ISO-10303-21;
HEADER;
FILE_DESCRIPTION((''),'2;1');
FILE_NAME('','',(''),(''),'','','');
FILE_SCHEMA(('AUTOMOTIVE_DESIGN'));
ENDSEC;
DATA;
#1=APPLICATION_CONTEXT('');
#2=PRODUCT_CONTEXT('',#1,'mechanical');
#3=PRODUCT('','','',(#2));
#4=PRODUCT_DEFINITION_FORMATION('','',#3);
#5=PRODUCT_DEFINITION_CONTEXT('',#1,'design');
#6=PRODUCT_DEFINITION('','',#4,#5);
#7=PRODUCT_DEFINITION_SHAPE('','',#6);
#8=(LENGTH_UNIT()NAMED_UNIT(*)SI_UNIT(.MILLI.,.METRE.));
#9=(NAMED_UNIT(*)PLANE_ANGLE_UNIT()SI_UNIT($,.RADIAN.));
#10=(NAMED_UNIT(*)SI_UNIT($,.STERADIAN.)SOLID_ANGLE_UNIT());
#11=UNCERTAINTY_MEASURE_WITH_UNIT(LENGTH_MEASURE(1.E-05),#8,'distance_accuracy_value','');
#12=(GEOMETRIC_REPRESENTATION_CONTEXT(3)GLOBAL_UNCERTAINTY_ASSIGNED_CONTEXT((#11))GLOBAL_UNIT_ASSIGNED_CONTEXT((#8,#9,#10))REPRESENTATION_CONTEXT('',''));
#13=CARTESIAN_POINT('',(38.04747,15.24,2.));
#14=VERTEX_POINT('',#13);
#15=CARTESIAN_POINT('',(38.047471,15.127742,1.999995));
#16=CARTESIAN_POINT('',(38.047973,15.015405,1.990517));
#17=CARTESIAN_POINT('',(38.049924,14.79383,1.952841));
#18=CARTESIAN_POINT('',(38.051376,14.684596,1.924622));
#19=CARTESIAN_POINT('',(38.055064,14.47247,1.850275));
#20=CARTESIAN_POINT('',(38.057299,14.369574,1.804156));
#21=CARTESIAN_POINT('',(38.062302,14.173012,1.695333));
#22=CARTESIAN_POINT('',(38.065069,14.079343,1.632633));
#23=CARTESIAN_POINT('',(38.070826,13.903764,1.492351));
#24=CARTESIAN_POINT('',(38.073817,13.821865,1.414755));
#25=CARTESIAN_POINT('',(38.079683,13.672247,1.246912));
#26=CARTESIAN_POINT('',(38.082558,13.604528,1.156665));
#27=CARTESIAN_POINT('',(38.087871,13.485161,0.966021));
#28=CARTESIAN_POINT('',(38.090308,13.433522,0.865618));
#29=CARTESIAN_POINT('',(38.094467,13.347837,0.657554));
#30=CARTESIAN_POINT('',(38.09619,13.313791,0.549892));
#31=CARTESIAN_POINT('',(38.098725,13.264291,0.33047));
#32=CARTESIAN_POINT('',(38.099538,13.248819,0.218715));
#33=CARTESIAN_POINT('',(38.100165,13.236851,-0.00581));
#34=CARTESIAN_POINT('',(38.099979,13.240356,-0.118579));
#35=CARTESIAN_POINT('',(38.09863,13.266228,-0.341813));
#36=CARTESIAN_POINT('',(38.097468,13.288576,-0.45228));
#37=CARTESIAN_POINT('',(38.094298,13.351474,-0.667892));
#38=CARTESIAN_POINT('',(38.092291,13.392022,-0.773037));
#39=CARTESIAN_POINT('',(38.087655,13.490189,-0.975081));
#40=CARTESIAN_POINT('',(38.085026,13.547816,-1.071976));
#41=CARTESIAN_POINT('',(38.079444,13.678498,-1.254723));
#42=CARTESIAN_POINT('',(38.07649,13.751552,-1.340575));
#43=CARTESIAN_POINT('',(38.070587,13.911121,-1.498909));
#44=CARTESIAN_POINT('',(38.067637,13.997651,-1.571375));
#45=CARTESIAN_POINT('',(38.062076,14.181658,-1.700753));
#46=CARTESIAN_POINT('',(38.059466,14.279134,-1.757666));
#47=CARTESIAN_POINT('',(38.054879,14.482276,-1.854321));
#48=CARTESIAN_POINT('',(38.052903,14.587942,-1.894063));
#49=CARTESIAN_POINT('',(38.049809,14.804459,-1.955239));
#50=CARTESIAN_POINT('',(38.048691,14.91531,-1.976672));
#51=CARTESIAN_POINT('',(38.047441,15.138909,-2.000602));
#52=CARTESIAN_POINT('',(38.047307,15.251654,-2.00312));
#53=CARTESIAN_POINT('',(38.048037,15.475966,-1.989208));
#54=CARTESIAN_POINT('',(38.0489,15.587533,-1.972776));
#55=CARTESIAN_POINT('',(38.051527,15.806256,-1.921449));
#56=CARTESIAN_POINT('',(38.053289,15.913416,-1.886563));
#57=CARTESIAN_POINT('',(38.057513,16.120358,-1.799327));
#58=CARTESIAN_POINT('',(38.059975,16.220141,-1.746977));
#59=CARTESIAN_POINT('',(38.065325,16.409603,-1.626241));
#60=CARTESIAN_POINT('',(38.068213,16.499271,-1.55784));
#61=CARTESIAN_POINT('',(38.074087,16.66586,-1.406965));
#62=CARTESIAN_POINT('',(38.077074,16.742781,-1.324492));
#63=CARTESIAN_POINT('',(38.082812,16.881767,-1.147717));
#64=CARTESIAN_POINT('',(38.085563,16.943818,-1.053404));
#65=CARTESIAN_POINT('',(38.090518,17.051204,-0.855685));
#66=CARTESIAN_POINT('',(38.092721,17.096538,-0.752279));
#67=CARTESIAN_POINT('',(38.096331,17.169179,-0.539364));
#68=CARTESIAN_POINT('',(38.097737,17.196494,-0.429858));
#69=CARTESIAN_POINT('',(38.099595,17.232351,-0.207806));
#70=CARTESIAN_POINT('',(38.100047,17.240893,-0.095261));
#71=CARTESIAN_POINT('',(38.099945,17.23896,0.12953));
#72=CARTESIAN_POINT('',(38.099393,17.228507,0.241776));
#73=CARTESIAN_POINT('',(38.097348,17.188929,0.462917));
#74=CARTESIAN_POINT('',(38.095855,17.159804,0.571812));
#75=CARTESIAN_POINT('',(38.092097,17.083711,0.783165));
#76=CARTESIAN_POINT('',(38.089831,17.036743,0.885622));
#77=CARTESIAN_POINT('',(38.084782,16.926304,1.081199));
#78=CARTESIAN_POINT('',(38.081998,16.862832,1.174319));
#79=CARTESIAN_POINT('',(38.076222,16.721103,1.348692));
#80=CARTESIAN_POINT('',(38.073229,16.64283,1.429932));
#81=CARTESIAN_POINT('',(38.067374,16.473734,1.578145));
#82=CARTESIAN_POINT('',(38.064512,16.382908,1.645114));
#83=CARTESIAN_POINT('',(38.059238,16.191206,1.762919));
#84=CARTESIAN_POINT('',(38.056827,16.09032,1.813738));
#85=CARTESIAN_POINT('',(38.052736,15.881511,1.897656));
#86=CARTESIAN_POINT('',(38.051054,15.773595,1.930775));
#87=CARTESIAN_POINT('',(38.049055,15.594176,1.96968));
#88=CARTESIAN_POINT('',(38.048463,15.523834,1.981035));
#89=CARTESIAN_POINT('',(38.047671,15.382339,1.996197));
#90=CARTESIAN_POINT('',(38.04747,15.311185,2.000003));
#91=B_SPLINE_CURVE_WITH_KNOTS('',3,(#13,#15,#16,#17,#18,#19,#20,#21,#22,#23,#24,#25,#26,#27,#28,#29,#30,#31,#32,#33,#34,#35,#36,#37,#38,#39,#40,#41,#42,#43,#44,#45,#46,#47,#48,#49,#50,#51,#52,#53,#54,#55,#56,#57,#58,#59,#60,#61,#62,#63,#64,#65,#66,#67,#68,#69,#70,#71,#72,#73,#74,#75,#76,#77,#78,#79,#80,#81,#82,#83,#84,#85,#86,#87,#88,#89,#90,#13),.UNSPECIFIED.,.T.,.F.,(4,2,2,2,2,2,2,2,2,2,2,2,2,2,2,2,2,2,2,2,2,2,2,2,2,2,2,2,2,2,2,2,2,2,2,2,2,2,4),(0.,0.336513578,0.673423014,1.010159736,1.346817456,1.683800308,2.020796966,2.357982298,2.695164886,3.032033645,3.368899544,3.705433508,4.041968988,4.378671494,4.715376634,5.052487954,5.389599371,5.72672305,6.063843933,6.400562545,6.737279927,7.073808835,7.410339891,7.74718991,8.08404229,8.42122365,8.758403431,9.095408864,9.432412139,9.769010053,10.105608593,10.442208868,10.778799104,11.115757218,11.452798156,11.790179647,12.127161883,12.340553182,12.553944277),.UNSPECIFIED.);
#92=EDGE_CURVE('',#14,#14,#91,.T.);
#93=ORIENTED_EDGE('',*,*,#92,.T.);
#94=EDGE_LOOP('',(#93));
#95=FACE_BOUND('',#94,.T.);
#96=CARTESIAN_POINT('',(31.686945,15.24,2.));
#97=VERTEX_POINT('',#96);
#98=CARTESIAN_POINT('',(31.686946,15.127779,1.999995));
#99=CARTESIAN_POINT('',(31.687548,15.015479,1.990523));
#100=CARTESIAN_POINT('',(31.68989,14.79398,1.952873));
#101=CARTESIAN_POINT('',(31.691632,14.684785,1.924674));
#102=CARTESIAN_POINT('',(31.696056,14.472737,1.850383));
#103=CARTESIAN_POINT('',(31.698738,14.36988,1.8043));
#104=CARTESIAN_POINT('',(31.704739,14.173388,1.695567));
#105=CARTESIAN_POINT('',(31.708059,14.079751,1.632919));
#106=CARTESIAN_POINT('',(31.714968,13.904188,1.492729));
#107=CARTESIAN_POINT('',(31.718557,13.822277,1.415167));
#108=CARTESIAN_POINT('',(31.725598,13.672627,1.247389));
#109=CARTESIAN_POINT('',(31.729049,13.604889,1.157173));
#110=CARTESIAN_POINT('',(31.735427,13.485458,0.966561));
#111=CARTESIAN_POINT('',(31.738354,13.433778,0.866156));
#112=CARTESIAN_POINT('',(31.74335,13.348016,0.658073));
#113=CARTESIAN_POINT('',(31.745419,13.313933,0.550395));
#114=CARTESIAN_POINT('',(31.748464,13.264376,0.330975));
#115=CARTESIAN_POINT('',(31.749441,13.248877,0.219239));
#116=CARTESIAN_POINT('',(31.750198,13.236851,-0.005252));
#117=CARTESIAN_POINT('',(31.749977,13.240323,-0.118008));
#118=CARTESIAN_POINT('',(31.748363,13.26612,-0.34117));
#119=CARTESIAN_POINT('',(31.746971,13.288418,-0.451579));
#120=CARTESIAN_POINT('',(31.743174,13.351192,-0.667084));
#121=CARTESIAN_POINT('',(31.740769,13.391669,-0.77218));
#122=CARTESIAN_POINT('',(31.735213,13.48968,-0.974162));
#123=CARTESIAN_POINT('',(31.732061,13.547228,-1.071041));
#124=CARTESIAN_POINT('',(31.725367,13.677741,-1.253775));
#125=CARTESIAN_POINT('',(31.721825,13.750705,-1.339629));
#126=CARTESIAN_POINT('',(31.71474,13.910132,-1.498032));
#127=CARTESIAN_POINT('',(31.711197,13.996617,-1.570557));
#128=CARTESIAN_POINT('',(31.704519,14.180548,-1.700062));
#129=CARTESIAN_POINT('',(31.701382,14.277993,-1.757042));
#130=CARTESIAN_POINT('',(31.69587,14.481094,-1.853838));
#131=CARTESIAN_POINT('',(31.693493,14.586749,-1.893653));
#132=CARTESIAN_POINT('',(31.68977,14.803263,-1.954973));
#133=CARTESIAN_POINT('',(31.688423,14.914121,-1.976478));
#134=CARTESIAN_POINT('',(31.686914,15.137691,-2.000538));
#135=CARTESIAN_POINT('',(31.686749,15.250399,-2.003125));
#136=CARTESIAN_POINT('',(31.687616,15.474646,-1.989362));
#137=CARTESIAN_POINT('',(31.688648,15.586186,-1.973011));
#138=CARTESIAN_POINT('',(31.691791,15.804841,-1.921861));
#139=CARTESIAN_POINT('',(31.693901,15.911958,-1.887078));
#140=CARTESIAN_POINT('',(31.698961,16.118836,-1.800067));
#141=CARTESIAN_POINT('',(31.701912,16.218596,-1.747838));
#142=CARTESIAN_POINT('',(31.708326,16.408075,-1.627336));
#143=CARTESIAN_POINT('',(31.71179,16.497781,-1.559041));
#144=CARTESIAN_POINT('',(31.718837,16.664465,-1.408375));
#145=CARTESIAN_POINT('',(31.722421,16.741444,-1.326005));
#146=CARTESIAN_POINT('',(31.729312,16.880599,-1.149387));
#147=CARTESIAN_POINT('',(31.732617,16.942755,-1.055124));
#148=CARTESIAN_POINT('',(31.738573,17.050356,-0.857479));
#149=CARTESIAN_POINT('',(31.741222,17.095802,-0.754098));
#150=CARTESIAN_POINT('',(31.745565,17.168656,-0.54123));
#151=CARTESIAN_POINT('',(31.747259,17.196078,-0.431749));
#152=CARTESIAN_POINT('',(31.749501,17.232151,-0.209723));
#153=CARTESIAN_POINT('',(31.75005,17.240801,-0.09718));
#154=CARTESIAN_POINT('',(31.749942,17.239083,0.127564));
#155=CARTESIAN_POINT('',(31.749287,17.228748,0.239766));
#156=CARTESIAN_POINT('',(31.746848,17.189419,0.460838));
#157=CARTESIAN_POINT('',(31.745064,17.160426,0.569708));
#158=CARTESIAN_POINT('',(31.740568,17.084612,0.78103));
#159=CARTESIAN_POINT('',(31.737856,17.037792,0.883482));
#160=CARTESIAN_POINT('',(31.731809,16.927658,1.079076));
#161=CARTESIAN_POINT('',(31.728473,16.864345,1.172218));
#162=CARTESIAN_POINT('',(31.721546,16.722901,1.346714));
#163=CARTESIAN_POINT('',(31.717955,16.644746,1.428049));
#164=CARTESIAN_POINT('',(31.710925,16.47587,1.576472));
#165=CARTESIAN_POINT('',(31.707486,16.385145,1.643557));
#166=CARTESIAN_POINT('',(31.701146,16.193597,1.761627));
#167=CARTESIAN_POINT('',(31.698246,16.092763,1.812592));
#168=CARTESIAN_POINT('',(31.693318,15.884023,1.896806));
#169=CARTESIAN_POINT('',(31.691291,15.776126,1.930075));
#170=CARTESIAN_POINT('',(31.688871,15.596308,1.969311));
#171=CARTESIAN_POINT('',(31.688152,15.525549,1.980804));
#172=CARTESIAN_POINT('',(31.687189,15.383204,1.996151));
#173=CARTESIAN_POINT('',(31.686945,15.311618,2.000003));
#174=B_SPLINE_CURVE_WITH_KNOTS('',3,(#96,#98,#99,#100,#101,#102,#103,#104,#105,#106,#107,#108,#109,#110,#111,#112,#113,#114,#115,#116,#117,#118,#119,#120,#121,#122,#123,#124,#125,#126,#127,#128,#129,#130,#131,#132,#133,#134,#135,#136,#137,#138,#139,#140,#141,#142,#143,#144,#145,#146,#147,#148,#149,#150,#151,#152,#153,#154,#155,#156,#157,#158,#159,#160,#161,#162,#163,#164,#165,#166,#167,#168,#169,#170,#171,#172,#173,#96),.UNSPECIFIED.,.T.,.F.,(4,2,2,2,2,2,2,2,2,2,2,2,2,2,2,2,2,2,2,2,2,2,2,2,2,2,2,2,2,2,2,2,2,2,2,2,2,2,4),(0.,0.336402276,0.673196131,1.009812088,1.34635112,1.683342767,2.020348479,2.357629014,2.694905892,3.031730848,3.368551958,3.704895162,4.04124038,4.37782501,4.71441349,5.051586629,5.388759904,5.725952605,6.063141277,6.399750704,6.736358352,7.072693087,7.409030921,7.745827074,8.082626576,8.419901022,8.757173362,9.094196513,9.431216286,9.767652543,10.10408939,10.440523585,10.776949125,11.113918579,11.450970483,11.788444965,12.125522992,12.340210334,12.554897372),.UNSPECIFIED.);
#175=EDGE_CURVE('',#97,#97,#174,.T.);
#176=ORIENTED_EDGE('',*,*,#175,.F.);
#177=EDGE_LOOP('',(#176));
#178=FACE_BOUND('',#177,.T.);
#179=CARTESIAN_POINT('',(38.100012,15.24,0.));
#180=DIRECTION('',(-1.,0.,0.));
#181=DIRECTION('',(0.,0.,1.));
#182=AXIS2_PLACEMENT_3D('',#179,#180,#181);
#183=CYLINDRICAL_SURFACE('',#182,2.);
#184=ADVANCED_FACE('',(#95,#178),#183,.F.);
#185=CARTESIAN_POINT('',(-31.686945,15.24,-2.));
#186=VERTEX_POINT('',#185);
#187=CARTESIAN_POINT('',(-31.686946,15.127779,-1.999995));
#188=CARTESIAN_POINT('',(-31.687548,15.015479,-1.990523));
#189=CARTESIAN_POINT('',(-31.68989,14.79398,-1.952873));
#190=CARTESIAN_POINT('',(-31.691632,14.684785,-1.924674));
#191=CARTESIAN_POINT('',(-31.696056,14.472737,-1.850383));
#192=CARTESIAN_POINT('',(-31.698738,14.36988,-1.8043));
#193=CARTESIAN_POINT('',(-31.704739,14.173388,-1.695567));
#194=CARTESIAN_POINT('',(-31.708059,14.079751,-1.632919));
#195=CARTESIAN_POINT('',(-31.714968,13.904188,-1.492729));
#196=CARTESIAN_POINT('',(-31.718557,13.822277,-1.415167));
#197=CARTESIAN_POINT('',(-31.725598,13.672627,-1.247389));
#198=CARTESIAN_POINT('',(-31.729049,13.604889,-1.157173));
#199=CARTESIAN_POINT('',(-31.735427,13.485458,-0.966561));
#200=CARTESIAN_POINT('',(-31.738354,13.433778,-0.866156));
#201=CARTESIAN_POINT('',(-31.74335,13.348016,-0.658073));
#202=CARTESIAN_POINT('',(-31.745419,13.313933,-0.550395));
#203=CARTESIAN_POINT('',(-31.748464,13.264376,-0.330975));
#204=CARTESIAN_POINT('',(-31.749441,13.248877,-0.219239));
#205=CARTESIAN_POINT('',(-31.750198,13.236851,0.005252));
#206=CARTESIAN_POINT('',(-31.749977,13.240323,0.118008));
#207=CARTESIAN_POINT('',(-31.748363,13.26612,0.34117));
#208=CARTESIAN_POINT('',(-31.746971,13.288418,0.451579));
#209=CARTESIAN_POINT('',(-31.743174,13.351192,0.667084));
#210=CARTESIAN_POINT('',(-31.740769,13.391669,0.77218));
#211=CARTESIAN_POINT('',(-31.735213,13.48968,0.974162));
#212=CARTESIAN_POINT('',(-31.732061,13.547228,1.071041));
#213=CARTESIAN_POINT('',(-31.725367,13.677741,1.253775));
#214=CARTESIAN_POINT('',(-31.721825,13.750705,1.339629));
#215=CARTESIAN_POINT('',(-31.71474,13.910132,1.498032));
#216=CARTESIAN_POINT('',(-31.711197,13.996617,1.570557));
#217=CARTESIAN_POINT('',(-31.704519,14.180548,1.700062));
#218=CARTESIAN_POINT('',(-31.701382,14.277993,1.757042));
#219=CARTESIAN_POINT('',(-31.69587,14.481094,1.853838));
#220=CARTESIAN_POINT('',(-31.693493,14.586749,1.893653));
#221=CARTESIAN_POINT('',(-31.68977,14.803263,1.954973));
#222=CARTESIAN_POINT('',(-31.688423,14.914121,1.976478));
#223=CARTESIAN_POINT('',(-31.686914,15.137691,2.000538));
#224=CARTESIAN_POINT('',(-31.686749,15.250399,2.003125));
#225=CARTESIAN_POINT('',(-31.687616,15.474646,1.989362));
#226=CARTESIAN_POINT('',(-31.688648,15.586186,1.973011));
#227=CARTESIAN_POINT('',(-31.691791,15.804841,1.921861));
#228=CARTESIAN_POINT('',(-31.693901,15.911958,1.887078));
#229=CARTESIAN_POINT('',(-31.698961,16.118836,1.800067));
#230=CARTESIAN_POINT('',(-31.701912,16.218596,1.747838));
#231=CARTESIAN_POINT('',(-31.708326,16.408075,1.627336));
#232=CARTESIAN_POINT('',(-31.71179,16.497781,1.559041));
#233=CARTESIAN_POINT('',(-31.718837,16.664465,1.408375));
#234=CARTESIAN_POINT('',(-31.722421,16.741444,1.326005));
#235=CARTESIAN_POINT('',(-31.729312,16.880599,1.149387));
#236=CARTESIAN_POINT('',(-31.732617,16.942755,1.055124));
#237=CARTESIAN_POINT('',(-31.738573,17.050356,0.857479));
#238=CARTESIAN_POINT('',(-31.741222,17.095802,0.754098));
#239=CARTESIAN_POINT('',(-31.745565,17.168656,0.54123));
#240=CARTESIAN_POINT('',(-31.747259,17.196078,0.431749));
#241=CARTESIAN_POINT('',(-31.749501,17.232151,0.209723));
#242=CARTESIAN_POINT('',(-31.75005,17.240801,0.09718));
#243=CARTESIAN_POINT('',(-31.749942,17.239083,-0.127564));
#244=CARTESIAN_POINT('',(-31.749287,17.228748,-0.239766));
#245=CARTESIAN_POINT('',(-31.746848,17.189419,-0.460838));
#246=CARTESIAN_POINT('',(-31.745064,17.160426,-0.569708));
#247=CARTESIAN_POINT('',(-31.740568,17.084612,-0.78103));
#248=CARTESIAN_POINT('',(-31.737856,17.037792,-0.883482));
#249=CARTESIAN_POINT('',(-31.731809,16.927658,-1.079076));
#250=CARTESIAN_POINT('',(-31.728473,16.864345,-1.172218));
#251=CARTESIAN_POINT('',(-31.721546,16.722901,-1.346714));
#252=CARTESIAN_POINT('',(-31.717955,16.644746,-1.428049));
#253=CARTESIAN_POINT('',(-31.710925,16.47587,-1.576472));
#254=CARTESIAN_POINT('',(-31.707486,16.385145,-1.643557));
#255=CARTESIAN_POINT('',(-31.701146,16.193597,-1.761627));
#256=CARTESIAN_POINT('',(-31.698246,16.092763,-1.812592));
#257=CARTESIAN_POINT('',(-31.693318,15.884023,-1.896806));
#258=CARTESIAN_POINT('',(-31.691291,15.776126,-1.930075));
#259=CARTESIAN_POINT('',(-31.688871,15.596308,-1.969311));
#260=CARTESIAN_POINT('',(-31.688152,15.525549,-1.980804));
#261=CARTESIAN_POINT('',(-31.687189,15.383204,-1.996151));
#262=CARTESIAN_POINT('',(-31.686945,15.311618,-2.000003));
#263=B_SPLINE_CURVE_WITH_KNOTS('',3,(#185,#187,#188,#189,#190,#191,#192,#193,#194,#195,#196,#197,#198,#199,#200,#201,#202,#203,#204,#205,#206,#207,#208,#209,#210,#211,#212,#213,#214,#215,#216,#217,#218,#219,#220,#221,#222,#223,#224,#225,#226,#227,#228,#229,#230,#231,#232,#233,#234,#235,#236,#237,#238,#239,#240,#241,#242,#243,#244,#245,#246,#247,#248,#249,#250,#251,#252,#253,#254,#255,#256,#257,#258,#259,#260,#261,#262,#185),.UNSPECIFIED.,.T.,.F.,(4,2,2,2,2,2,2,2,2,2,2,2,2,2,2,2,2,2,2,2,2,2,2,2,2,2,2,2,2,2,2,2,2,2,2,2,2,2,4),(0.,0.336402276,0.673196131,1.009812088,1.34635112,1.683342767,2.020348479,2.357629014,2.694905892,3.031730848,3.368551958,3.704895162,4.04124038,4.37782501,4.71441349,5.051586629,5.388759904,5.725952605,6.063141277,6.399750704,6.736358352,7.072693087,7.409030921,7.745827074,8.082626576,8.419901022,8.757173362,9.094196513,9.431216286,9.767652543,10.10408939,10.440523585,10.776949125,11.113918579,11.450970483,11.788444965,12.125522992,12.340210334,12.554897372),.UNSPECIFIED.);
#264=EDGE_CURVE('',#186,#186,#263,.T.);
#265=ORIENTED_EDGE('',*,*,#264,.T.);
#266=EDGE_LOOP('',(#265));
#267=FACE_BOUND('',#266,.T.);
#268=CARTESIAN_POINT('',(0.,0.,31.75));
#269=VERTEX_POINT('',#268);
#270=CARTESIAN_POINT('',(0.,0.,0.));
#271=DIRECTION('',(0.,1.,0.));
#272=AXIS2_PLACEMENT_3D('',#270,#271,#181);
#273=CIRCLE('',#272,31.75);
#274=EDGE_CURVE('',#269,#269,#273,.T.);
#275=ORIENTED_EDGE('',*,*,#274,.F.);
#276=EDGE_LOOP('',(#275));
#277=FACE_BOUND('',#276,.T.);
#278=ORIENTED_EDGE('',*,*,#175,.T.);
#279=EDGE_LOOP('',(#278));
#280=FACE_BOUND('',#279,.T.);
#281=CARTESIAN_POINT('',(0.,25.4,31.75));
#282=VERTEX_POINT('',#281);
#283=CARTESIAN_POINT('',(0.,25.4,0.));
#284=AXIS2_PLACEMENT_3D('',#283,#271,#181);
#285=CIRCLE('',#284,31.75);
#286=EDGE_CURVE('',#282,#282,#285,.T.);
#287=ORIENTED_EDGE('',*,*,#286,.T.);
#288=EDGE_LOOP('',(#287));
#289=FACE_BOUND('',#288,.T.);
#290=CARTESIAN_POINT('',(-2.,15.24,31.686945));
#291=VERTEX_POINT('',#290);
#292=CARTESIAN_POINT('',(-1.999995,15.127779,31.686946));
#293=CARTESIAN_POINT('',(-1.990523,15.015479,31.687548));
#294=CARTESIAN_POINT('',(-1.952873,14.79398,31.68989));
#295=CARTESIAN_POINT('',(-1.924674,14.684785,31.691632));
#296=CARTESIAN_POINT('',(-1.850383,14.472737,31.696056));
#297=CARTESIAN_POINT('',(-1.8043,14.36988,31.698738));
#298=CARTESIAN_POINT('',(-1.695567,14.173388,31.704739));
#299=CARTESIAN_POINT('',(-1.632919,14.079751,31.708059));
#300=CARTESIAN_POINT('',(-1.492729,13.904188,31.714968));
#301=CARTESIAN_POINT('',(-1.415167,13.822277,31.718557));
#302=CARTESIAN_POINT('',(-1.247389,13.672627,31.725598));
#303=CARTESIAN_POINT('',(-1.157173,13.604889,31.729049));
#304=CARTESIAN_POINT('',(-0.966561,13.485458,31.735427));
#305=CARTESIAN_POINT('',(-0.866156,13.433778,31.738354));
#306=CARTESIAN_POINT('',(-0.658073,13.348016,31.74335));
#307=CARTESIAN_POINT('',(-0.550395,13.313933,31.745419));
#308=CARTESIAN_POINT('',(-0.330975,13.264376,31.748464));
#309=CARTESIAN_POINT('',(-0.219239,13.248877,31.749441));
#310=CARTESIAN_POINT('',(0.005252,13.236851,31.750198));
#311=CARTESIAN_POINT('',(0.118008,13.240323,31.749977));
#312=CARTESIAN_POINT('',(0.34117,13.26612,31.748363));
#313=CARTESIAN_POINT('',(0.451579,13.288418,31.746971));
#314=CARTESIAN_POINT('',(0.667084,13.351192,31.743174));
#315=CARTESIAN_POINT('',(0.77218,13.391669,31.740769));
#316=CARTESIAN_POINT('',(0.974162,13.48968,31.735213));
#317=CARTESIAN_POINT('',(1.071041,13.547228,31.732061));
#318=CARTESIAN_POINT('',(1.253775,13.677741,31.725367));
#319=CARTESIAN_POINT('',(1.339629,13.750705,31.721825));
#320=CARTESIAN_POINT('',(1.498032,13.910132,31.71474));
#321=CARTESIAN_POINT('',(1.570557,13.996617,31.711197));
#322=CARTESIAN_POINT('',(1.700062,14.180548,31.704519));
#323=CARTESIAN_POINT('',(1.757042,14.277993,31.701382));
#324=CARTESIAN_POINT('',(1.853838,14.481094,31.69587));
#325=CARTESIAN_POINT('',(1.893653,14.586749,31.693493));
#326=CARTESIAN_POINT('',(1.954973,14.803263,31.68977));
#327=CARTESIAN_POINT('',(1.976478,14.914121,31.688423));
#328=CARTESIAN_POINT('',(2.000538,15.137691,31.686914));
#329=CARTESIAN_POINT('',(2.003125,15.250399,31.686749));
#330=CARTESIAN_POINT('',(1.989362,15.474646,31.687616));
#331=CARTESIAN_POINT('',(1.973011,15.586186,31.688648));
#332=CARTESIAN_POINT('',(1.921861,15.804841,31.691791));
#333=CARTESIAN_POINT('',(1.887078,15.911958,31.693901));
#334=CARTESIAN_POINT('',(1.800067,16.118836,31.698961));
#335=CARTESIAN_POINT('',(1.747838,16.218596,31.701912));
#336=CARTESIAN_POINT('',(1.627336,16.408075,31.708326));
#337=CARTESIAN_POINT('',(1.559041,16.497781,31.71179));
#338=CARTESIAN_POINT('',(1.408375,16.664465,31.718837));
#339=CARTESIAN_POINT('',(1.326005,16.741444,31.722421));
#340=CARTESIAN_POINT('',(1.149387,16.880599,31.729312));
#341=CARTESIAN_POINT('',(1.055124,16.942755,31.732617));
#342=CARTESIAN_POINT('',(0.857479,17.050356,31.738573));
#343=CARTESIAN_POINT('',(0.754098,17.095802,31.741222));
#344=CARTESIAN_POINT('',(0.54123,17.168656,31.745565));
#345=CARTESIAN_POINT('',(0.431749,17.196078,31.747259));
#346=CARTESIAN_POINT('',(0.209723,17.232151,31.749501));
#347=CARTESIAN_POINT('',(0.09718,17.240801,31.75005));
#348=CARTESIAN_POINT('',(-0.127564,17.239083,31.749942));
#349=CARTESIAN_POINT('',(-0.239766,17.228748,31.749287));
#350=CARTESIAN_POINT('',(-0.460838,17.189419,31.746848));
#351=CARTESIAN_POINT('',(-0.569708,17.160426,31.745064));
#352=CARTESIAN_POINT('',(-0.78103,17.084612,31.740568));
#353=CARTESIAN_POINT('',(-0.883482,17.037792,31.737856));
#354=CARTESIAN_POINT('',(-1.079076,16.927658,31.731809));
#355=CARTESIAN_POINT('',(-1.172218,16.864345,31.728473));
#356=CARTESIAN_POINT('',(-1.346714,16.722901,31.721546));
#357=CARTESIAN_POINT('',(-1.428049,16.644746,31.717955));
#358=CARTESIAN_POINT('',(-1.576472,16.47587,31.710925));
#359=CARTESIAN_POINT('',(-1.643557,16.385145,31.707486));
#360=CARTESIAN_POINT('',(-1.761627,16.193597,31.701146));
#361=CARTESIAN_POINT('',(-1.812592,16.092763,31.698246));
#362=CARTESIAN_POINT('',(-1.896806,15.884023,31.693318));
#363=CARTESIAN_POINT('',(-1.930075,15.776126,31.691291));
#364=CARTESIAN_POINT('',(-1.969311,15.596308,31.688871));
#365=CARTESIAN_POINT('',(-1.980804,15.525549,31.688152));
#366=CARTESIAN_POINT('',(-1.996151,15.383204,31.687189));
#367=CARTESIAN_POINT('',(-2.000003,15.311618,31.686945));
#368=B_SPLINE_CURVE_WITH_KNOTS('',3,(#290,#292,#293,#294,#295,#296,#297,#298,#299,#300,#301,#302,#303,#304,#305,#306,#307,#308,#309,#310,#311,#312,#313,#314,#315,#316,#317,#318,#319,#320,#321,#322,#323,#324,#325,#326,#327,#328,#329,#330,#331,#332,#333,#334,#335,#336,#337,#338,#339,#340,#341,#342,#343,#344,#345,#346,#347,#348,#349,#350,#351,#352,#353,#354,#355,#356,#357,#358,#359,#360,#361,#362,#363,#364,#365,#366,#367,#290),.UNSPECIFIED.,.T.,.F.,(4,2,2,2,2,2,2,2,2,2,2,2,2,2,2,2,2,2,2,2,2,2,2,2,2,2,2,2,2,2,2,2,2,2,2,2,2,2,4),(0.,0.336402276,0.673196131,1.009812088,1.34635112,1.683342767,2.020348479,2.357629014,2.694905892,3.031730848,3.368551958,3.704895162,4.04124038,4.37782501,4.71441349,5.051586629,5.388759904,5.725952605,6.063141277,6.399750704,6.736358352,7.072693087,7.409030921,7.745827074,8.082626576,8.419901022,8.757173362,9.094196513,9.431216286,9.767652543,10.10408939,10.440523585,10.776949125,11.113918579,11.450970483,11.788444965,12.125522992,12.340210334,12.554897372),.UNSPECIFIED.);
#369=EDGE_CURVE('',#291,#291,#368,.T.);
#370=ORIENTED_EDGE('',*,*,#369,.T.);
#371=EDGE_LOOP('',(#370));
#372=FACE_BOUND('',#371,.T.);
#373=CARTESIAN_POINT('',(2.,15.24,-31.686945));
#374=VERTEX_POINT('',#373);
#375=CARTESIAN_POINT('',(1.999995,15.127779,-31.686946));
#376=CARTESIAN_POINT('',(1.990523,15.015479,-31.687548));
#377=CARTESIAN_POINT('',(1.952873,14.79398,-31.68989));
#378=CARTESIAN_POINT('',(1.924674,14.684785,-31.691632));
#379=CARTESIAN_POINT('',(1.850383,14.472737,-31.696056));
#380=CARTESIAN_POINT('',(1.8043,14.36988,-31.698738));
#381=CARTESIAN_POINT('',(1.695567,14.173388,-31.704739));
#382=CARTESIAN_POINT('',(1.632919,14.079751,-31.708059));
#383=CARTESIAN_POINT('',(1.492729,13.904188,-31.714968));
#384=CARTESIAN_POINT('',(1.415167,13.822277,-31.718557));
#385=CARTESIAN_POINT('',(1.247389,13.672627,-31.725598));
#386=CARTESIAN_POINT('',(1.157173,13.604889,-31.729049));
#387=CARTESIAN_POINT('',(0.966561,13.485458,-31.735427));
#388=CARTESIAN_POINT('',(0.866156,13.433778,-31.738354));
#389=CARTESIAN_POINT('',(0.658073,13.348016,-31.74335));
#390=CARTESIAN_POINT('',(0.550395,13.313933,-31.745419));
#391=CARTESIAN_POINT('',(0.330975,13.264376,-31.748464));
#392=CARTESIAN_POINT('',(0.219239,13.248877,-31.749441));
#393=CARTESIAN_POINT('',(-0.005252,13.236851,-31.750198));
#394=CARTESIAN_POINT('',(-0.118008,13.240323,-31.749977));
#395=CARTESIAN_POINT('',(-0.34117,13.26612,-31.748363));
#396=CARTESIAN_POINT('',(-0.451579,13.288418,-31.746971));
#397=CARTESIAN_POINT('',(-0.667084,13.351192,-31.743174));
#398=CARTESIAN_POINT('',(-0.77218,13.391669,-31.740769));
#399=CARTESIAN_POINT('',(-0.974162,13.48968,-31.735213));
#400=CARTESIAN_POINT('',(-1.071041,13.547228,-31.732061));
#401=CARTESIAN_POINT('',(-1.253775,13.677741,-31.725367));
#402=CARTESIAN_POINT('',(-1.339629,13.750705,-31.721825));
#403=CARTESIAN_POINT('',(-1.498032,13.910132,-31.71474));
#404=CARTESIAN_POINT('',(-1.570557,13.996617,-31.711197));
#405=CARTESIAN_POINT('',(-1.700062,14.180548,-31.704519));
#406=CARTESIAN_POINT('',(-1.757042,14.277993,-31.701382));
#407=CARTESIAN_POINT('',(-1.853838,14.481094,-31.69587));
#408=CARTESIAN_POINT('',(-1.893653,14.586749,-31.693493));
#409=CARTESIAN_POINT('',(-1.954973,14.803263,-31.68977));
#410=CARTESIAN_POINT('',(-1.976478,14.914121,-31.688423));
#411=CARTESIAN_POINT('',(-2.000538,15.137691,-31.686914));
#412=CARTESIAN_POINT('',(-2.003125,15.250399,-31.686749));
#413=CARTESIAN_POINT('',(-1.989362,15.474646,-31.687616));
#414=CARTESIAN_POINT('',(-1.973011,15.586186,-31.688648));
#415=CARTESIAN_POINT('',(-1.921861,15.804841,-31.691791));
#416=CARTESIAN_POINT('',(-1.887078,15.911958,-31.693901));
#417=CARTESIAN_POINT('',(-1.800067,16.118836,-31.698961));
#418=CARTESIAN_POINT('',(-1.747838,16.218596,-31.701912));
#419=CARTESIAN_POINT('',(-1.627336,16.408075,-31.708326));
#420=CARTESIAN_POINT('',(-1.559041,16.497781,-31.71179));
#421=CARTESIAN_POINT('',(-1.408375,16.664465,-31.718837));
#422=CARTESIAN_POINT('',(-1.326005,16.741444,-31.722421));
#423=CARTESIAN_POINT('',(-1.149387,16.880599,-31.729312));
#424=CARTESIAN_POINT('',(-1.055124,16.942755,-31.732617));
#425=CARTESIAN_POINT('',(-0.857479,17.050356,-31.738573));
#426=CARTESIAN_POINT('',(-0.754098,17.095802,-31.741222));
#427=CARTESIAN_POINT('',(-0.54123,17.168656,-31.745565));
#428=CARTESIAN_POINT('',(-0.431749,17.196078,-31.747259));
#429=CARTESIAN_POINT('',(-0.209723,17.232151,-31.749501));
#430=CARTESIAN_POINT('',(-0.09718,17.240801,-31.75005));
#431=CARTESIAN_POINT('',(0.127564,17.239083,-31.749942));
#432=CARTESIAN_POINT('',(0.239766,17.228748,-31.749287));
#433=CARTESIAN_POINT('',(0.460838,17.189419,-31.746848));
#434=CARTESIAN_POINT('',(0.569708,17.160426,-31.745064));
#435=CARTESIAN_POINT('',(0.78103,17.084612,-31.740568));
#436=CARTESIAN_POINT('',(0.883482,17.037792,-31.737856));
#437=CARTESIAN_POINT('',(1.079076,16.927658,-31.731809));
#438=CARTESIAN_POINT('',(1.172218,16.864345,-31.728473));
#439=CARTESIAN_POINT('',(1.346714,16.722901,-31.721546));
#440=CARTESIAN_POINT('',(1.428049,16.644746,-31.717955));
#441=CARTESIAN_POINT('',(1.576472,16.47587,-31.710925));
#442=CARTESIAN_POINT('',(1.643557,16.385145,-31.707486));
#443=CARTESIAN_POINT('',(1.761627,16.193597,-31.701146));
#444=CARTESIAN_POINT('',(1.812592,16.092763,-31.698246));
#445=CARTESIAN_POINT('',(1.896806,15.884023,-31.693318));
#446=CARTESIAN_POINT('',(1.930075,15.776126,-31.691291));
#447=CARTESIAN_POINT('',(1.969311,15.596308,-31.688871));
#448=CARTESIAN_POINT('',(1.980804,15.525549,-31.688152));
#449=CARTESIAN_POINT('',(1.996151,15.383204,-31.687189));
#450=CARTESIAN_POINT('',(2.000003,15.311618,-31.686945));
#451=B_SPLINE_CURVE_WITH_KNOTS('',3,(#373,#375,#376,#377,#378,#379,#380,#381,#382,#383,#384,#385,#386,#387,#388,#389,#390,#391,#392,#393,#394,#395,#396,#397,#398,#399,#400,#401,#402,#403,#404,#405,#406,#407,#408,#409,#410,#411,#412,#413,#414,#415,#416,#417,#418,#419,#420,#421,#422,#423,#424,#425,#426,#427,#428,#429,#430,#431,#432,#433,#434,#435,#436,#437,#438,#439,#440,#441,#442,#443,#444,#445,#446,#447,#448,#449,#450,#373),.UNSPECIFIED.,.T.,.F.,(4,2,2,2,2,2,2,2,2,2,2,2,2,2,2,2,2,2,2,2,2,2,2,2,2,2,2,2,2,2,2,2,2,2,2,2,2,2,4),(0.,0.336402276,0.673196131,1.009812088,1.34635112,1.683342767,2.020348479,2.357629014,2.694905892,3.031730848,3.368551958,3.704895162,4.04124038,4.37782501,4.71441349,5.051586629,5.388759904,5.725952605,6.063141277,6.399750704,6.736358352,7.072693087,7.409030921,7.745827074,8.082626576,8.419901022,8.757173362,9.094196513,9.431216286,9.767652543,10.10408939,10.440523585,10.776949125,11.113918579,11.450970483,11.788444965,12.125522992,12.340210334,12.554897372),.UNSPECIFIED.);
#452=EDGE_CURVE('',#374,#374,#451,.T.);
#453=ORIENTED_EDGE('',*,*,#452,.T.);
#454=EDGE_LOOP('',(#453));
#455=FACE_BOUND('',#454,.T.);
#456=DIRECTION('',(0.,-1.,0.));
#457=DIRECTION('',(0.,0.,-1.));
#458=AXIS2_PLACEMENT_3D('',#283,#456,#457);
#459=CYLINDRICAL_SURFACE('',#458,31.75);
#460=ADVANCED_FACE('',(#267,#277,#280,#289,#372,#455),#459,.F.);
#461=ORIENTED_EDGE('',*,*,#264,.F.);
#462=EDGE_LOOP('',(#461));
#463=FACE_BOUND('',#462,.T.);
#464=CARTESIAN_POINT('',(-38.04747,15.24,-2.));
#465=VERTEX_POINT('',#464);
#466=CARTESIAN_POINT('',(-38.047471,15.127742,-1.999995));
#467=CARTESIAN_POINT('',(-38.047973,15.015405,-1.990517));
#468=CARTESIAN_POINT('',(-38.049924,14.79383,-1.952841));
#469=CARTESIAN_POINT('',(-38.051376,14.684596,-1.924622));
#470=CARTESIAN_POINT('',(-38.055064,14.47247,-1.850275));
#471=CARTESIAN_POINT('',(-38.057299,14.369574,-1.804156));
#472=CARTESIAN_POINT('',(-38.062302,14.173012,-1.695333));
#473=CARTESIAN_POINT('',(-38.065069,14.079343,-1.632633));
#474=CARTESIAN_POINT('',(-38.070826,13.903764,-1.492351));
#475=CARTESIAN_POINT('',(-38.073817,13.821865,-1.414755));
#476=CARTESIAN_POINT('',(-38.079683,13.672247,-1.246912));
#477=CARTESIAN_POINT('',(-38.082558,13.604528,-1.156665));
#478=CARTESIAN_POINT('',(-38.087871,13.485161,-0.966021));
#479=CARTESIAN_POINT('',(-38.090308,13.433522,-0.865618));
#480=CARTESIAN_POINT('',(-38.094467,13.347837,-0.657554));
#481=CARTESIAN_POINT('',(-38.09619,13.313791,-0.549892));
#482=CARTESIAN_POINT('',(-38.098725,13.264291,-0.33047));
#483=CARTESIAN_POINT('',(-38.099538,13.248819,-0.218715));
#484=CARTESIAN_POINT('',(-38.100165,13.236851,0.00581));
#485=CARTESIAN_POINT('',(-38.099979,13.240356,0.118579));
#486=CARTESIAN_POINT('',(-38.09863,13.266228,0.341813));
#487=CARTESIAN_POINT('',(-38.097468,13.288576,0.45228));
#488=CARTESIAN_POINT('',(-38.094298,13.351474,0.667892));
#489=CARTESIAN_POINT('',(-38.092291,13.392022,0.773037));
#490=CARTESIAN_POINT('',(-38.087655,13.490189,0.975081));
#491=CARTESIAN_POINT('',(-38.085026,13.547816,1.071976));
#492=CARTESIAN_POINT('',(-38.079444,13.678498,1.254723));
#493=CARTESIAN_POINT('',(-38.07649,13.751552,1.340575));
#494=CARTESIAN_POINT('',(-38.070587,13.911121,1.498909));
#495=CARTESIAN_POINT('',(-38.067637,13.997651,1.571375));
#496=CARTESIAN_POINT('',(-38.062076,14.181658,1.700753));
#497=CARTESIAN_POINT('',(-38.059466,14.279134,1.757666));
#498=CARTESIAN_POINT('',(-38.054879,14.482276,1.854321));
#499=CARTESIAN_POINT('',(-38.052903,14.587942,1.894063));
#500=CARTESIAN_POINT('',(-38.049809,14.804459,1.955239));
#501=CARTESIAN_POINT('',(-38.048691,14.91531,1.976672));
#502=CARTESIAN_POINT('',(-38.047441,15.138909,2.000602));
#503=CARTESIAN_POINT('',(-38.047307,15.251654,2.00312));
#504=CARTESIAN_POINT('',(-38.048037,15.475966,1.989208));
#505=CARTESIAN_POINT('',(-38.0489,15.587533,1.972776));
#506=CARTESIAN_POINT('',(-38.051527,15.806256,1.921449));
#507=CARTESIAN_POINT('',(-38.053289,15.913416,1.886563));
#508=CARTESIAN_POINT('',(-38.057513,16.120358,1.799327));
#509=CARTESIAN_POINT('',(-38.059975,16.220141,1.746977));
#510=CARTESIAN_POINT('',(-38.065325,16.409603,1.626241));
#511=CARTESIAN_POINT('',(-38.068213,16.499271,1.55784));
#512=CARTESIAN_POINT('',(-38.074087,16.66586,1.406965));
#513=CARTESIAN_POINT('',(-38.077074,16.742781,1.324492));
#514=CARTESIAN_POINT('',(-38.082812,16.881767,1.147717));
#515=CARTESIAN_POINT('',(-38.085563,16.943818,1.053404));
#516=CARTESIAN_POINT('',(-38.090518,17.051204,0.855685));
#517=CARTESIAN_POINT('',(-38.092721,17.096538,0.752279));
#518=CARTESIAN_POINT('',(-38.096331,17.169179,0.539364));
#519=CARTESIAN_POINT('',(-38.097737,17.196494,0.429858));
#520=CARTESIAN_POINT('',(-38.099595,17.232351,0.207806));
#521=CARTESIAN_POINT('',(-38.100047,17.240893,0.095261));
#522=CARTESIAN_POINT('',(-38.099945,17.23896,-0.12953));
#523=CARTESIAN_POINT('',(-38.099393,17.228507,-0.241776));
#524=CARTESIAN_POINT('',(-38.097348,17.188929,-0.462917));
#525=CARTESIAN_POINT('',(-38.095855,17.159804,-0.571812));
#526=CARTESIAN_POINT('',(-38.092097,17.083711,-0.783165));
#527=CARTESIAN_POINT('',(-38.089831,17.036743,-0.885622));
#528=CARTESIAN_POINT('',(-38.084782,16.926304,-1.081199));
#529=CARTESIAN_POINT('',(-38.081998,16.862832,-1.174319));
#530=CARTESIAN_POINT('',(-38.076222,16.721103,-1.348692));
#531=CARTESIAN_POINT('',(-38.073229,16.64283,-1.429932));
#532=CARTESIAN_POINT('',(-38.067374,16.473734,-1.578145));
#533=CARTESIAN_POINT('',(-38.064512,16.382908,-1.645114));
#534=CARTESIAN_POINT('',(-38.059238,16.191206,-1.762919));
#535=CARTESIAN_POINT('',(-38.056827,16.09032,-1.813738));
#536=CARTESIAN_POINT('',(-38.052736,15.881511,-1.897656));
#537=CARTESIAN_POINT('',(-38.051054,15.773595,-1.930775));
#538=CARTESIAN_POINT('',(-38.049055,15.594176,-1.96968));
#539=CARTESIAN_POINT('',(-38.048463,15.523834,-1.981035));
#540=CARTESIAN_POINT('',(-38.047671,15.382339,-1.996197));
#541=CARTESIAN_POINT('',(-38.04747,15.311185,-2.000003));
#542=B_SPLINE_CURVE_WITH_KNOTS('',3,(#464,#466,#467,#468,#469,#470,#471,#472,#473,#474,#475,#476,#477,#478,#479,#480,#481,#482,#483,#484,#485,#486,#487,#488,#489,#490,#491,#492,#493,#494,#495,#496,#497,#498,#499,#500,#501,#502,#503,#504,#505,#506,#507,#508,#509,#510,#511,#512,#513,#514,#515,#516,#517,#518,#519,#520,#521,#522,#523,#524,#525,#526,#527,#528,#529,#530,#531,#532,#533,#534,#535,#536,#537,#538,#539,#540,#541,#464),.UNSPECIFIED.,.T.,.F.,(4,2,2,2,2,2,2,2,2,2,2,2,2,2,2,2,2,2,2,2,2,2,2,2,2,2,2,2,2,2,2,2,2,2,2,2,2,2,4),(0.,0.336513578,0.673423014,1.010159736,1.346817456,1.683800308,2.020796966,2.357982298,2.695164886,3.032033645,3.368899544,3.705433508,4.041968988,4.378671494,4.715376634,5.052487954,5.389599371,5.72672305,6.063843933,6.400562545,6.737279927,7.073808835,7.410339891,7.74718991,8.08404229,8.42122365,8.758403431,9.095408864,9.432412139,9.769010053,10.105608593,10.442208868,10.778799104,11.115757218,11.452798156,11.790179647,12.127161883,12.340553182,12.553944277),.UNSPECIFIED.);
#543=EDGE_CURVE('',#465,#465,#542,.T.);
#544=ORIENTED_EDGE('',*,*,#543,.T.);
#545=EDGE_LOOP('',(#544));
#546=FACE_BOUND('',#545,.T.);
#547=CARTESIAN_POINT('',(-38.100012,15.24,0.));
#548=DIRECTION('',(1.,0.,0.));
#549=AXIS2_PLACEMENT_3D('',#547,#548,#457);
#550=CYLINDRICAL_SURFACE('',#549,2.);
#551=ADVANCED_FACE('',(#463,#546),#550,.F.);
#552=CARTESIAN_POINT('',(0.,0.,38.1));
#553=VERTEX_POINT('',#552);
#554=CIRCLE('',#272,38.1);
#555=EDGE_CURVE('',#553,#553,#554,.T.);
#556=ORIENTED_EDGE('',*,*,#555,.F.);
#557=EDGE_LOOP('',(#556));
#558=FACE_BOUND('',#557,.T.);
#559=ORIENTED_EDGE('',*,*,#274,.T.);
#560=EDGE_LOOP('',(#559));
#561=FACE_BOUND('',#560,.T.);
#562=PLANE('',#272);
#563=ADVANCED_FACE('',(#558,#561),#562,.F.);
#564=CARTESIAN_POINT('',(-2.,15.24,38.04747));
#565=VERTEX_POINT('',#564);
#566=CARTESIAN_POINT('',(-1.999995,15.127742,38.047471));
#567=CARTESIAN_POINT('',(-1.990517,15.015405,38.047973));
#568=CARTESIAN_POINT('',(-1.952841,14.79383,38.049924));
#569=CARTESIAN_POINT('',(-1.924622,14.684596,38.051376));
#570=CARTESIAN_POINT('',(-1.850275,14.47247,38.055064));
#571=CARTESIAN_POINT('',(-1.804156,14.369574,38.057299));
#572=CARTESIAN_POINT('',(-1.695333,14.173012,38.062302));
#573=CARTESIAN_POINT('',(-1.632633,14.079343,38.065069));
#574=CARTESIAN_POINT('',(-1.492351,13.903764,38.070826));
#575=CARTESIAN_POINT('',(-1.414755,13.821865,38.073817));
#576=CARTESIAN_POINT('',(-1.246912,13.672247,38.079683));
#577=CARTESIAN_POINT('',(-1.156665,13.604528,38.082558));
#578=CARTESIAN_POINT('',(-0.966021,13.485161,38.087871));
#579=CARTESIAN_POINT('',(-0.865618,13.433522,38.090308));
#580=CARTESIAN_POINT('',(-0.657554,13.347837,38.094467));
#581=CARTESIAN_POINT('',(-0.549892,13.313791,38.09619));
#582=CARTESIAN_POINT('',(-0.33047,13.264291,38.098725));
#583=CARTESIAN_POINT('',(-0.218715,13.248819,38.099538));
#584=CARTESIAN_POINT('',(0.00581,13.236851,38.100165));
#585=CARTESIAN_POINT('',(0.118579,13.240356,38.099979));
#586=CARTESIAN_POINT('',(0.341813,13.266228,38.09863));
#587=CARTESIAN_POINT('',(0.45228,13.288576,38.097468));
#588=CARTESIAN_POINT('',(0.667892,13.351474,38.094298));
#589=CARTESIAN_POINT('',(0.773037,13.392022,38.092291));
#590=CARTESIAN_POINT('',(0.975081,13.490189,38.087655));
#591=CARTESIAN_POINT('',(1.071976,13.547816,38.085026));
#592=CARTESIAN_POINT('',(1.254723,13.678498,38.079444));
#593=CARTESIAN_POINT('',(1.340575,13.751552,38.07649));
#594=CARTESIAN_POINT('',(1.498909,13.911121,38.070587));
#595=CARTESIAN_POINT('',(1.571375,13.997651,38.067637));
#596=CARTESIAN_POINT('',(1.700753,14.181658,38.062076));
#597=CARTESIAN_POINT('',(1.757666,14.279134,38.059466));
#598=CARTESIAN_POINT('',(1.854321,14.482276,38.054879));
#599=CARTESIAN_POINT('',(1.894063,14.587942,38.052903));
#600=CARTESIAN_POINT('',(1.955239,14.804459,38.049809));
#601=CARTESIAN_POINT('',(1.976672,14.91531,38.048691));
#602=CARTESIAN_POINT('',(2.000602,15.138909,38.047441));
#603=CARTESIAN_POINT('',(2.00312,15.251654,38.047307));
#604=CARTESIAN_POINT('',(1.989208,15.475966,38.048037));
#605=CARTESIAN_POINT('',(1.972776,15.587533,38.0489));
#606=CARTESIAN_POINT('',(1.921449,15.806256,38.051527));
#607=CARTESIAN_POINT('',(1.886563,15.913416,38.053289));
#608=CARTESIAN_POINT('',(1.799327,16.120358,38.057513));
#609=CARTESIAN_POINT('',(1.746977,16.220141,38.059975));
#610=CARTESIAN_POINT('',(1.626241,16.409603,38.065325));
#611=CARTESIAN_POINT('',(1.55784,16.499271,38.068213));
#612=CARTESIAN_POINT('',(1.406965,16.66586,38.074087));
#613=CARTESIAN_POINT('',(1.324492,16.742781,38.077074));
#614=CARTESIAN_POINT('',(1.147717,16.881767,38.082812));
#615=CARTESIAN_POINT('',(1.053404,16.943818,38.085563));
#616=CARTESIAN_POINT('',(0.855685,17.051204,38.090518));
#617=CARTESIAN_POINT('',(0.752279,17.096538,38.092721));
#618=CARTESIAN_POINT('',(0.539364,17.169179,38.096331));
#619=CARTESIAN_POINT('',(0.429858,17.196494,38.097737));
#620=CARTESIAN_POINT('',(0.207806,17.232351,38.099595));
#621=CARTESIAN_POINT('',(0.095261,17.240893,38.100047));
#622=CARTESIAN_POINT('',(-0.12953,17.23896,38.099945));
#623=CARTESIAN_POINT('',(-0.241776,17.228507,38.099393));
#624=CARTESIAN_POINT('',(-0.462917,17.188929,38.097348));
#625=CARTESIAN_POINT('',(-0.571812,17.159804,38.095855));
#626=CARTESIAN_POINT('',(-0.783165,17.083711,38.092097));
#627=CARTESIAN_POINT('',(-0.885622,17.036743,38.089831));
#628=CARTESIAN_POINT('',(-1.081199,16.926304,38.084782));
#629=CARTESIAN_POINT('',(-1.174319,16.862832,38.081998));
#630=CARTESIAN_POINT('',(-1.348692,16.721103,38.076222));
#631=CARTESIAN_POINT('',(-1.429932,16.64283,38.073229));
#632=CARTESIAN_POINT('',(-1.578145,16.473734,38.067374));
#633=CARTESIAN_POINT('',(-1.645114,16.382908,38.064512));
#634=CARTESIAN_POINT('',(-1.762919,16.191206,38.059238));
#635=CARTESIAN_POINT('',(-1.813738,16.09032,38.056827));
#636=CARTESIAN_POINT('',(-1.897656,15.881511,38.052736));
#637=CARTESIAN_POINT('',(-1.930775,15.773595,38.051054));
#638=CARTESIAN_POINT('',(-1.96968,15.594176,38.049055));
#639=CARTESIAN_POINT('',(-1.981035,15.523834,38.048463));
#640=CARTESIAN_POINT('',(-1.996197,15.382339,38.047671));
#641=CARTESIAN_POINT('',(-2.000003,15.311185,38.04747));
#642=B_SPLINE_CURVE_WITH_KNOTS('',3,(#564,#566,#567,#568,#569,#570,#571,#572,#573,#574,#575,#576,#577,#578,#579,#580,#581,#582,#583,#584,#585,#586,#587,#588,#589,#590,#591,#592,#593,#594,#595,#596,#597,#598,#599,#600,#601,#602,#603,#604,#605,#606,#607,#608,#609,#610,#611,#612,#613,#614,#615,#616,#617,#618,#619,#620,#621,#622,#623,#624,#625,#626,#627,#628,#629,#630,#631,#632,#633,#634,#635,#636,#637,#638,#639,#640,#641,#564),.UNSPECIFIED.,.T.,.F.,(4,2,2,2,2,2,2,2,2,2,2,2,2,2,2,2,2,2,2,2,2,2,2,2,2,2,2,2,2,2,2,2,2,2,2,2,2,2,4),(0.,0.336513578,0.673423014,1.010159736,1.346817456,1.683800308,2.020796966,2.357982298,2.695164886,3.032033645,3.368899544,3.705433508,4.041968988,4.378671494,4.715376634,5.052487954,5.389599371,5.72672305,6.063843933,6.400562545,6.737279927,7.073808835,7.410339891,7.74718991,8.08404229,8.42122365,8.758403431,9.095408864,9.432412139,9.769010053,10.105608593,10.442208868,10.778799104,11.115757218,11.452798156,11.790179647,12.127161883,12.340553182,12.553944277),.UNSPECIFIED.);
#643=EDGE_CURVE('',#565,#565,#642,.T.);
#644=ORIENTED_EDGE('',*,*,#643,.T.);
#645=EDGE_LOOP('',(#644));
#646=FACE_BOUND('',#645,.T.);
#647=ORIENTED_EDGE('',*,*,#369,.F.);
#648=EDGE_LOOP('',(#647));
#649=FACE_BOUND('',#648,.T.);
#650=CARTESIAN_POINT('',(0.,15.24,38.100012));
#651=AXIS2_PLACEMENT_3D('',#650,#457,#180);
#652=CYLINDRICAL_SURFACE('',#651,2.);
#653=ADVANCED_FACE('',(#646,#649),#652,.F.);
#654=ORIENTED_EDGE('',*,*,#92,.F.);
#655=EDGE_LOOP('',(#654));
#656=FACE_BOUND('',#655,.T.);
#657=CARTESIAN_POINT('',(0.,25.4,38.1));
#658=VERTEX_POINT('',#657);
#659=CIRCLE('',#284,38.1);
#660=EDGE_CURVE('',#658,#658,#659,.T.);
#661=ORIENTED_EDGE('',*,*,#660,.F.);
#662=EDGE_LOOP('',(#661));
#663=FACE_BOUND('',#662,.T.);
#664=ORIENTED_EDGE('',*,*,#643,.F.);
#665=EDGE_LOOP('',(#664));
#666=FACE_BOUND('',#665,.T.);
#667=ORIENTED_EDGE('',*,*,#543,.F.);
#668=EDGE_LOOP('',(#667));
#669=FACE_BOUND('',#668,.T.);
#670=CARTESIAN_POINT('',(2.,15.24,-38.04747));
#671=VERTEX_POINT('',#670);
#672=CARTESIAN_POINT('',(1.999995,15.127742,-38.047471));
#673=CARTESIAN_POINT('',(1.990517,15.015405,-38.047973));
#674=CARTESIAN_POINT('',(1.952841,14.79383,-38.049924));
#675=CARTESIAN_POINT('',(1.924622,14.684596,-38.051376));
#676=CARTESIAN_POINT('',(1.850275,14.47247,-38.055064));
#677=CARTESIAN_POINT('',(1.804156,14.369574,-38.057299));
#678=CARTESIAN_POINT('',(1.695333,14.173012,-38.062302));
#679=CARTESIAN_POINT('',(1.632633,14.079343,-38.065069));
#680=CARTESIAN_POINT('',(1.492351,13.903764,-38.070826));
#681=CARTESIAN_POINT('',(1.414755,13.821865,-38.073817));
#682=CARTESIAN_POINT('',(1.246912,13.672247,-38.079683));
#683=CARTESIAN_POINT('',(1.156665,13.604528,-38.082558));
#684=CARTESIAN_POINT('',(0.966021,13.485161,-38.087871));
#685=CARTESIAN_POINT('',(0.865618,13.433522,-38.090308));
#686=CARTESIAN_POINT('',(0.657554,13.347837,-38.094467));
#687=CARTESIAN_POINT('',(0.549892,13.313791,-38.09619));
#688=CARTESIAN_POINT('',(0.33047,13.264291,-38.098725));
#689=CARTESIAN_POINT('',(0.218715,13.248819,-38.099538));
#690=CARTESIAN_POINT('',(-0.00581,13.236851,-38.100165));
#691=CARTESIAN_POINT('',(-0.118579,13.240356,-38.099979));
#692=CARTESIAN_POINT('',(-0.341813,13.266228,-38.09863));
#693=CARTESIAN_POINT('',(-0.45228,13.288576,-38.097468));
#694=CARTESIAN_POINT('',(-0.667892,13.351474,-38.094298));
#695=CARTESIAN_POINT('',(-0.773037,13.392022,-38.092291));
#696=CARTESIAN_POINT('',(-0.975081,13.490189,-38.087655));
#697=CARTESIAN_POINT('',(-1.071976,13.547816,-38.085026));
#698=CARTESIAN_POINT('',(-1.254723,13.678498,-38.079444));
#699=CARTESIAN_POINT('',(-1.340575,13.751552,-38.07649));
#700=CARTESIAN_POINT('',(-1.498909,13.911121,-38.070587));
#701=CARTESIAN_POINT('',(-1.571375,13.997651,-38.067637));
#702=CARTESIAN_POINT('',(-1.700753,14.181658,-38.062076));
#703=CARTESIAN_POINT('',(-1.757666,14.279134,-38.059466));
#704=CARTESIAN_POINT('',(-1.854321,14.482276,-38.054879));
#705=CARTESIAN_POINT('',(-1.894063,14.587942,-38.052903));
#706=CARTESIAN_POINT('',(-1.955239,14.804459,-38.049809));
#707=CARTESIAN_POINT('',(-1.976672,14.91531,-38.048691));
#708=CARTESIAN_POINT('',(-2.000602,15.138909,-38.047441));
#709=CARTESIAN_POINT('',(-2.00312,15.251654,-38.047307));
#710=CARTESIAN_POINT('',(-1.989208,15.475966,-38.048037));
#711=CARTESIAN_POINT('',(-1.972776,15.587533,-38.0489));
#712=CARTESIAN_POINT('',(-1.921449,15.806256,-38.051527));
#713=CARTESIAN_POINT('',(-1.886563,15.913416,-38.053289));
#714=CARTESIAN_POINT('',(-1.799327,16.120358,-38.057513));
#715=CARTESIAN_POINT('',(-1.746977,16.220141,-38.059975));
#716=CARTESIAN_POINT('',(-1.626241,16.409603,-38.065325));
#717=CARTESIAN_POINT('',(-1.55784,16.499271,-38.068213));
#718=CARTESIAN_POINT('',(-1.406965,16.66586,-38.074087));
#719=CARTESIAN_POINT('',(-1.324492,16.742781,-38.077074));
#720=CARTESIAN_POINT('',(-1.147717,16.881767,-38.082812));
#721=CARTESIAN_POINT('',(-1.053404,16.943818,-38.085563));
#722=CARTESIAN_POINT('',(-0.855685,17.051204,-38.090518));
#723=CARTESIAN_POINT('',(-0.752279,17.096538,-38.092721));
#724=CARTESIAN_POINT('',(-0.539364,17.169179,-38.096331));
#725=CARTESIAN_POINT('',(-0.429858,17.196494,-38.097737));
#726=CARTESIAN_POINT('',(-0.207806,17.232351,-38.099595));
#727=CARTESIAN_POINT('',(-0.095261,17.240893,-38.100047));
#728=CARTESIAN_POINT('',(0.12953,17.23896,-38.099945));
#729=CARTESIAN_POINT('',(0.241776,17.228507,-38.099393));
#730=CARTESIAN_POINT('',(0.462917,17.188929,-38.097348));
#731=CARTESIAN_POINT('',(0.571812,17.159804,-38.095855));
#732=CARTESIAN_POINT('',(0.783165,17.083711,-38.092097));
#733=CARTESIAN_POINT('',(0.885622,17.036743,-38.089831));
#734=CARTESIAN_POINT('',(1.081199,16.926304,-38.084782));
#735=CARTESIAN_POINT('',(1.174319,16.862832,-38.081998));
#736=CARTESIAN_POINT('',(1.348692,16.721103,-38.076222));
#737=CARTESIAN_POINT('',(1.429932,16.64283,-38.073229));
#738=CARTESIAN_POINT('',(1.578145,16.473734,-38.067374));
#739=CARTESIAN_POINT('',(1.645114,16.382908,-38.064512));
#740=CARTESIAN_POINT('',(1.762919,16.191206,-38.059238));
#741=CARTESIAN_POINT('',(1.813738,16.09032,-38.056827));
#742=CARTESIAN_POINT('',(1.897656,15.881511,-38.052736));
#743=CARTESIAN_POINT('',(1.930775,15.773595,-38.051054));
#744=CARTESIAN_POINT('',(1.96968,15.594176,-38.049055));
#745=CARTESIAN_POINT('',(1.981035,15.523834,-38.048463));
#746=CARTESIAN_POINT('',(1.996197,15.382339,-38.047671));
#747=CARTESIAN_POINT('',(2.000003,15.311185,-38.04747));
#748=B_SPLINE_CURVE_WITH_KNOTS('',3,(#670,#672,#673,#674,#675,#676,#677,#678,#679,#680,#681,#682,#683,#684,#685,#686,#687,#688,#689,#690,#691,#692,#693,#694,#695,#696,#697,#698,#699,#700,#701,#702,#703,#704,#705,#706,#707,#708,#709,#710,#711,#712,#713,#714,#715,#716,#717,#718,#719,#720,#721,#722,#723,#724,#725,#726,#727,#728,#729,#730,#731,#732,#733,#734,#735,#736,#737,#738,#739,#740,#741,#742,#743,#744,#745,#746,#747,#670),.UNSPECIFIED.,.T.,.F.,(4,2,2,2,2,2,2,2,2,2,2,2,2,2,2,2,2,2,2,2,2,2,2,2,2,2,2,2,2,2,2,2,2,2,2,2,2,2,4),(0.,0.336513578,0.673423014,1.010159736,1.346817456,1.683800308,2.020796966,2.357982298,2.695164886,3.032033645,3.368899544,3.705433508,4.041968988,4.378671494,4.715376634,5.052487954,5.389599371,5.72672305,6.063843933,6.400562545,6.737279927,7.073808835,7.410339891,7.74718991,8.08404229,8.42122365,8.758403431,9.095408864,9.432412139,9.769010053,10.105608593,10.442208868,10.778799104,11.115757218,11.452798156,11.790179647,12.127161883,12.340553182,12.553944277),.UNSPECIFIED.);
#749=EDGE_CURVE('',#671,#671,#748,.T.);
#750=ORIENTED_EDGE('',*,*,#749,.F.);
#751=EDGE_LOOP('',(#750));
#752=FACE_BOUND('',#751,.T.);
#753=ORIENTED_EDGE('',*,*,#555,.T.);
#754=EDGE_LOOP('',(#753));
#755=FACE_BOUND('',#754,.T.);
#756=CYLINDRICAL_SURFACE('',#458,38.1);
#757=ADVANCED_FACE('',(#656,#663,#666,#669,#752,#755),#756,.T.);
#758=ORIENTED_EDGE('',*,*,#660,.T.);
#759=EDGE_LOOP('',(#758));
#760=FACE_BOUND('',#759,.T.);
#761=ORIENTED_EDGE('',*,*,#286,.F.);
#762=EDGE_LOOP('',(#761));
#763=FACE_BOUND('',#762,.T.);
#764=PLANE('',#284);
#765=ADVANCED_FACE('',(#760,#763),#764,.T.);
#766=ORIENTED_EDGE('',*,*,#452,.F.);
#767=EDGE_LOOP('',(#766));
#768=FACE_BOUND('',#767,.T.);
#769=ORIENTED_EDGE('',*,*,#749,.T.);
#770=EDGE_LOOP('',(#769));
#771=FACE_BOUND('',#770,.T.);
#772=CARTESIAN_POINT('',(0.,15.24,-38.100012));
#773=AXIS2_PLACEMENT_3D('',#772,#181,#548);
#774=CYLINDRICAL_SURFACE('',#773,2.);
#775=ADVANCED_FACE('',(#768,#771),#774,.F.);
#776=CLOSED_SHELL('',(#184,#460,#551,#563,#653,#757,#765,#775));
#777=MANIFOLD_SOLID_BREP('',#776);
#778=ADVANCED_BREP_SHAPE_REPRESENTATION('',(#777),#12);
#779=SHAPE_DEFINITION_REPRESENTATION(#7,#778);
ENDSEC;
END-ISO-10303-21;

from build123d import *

# Parameters (mm, degrees)
SKETCH1_R               = 38.1
SKETCH1_R_2             = 31.75
BOSS_EXTRUDE1_DEPTH     = 25.4
CUT_EXTRUDE1_START      = -10
SKETCH2_R               = 2
CUT_EXTRUDE1_DEPTH      = 99.9
CIRPATTERN1_START       = 31.686945161
CIRPATTERN1_OUTLINE_R   = 2
CIRPATTERN1_DEPTH       = 6.413054905
CIRPATTERN1_START_2     = -38.100000066
CIRPATTERN1_2_OUTLINE_R = 2
CIRPATTERN1_2_DEPTH     = 76.200000132


# Read off the part's stored shape, not the designer's step: CirPattern1
with BuildPart() as part:
    # Sketch1 → Boss-Extrude1 (new body)
    with BuildSketch(Plane(origin=(0, 0, 0), x_dir=(1, 0, 0), z_dir=(0, 1, 0))):
        with Locations(Location((0, 0, 0), (0, 0, 270))):
            Circle(SKETCH1_R)
        with Locations(Location((0, 0, 0), (0, 0, 270))):
            Circle(SKETCH1_R_2, mode=Mode.SUBTRACT)
    extrude(amount=BOSS_EXTRUDE1_DEPTH)

    # Sketch2 → Cut-Extrude1 (cut)
    with BuildSketch(Plane.ZY.offset(38.1).offset(CUT_EXTRUDE1_START)):
        with Locations(Location((0, 15.24, 0), (0, 0, 180))):
            Circle(SKETCH2_R)
    extrude(amount=CUT_EXTRUDE1_DEPTH, mode=Mode.SUBTRACT)

    # CirPattern1 outline → CirPattern1 (cut)
    with BuildSketch(Plane.YZ.offset(CIRPATTERN1_START)):
        with Locations((15.24, 0)):
            Circle(CIRPATTERN1_OUTLINE_R)
    extrude(amount=CIRPATTERN1_DEPTH, mode=Mode.SUBTRACT)

    # CirPattern1 2 outline → CirPattern1 2 (cut)
    with BuildSketch(Plane.XY.offset(CIRPATTERN1_START_2)):
        with Locations((0, 15.24)):
            Circle(CIRPATTERN1_2_OUTLINE_R)
    extrude(amount=CIRPATTERN1_2_DEPTH, mode=Mode.SUBTRACT)


solid = part.part
